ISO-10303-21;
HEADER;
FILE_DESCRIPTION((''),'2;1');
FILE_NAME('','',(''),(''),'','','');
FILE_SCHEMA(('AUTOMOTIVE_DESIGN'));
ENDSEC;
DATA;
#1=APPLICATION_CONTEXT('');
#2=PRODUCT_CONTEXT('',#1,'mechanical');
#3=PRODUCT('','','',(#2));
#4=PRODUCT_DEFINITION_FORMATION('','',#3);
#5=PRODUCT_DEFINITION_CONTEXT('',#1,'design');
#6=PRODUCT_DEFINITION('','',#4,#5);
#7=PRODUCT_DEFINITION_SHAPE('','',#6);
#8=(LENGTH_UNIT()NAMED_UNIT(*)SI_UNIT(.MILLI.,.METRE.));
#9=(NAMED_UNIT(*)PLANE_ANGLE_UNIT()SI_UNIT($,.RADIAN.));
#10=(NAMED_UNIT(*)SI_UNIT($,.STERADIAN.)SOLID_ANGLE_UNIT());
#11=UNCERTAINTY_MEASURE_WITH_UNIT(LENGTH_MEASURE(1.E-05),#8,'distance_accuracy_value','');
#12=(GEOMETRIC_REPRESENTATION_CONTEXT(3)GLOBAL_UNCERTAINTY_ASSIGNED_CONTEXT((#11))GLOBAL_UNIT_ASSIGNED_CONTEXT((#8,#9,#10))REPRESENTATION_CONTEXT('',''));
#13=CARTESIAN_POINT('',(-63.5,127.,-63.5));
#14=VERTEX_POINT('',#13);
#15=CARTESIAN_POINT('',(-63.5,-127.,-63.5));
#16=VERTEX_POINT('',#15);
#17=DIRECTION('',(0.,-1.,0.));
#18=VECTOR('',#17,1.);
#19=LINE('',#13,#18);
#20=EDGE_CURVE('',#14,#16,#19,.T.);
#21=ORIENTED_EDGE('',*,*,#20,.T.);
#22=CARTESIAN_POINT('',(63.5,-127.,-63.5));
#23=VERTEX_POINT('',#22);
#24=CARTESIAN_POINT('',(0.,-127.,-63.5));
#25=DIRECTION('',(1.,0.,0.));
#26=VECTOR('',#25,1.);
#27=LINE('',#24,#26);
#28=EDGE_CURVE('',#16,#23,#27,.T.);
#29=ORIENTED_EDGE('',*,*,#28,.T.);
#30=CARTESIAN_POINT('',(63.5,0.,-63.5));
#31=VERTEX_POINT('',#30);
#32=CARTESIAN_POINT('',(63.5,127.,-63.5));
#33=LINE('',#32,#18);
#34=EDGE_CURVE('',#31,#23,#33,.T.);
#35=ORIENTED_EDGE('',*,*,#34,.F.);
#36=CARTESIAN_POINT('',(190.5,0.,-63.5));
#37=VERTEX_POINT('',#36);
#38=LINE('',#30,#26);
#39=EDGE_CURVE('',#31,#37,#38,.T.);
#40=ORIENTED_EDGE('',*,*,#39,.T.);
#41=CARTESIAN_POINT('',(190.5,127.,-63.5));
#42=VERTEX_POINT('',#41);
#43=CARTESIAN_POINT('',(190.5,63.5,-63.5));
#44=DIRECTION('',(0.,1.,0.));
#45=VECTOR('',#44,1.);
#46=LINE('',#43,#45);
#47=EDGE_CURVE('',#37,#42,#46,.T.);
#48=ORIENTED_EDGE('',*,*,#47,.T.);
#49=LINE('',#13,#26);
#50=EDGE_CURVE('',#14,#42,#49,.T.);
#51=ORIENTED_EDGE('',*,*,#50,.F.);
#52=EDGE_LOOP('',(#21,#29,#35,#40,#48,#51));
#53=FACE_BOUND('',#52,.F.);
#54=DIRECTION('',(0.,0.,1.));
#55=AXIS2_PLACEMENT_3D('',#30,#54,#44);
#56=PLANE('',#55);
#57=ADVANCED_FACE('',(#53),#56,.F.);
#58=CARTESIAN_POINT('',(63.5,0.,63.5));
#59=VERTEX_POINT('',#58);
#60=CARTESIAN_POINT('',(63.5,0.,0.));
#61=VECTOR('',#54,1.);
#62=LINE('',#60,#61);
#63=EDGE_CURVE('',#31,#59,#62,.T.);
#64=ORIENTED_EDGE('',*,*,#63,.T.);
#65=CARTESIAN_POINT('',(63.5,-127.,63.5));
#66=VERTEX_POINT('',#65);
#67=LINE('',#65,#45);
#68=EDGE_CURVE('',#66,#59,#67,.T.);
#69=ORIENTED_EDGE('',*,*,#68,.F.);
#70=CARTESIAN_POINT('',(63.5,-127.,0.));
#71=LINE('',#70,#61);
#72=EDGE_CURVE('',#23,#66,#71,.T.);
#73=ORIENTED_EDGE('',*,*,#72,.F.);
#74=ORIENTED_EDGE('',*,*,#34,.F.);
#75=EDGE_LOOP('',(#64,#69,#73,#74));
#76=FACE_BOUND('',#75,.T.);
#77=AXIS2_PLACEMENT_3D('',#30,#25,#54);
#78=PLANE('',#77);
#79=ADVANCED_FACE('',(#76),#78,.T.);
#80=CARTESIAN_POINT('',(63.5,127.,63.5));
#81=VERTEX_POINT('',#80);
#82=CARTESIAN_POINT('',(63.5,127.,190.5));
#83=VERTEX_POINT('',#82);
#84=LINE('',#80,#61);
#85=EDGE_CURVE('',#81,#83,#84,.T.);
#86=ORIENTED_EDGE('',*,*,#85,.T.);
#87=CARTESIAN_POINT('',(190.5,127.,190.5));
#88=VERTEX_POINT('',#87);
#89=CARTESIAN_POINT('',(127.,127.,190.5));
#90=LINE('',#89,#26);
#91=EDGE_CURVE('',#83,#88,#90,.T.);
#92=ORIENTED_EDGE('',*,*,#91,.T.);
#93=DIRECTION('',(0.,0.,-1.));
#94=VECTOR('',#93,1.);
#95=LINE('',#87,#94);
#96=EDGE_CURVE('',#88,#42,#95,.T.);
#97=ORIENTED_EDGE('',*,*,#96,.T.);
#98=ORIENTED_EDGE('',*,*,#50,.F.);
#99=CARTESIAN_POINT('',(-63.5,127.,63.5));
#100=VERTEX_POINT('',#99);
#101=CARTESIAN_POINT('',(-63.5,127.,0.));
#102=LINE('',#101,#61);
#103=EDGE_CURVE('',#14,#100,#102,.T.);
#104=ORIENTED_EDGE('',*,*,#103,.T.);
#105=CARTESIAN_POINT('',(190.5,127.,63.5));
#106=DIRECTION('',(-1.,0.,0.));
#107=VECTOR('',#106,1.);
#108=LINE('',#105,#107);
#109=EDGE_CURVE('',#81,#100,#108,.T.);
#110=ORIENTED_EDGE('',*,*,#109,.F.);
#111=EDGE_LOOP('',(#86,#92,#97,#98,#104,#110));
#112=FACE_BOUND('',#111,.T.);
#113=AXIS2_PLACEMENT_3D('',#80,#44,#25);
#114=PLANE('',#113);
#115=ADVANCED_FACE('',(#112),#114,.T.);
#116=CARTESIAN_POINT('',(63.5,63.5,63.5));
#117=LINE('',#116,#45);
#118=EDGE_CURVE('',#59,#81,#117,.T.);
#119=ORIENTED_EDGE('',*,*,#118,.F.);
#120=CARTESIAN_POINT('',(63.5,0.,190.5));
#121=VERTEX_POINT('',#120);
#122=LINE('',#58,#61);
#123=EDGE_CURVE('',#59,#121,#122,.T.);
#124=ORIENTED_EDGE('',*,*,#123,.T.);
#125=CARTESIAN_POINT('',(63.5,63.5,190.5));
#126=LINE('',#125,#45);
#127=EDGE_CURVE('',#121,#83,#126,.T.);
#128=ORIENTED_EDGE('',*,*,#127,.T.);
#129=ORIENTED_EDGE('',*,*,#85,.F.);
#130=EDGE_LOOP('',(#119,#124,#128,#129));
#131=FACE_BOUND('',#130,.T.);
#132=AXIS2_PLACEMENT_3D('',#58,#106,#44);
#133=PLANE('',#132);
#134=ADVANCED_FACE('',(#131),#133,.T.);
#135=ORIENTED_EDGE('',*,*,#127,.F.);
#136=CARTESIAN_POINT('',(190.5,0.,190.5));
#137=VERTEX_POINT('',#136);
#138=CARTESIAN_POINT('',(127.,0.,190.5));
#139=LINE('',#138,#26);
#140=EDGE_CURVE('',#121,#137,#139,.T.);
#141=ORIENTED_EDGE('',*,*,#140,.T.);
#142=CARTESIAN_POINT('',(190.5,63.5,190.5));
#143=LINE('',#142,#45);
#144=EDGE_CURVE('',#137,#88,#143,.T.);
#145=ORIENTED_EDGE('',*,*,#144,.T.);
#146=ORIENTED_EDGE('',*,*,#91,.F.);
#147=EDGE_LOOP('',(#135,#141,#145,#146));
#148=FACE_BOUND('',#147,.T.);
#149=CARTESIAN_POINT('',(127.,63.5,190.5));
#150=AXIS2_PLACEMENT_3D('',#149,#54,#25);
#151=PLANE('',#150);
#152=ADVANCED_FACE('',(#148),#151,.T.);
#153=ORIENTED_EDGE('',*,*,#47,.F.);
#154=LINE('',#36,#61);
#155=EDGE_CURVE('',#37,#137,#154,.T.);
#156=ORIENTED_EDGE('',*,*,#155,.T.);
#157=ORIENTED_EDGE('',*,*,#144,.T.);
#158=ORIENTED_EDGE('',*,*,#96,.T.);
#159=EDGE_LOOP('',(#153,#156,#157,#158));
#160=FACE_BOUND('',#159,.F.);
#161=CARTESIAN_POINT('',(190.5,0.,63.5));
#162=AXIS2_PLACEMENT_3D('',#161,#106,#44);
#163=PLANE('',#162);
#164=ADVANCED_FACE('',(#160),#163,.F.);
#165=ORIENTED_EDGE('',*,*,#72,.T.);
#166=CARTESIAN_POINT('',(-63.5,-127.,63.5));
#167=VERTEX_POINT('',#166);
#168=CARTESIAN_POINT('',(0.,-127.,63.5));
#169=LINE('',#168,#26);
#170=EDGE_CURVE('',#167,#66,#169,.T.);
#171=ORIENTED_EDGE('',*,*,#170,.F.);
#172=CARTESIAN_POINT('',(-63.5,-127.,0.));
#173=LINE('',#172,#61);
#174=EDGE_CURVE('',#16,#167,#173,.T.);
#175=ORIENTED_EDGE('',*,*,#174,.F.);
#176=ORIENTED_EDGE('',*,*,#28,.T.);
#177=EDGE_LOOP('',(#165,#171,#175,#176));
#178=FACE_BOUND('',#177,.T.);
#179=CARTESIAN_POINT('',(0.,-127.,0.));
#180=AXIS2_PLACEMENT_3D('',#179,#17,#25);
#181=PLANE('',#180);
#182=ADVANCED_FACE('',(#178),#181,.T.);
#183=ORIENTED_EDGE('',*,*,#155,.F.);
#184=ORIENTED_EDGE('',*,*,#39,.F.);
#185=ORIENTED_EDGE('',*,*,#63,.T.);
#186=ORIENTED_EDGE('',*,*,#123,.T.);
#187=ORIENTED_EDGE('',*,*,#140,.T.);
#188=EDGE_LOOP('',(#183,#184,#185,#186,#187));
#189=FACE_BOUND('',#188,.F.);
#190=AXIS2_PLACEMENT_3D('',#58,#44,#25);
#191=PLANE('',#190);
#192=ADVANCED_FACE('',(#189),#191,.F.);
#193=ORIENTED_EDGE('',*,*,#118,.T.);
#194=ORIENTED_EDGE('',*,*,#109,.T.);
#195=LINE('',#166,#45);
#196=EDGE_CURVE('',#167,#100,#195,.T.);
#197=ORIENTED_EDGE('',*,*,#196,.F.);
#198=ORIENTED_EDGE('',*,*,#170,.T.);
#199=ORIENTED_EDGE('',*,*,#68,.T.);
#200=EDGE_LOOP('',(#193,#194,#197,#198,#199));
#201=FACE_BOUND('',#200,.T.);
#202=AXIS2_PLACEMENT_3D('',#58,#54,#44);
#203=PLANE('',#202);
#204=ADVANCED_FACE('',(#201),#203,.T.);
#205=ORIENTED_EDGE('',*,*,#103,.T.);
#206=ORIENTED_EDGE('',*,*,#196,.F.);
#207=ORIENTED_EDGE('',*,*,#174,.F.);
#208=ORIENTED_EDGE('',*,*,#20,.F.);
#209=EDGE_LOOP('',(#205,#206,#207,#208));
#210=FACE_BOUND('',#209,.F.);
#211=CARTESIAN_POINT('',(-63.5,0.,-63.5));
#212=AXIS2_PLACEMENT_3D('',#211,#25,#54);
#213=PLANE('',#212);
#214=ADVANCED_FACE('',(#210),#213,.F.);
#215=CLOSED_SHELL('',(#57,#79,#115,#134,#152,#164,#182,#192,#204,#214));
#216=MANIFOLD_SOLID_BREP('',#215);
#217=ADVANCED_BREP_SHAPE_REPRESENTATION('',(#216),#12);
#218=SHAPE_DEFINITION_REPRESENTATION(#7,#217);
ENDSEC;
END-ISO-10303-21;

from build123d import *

# Parameters (mm, degrees)
F1_W     = 127
F1_H     = 127
F2_DEPTH = 127
F3_W     = 127
F3_H     = 127
F4_DEPTH = 127
F5_W     = 127
F5_H     = 127
F6_DEPTH = 127


# Not quite as in the source:
# - a variable given as a bare number and used for a length is read in inches; the dataset says mm whatever the document's units were


with BuildPart() as f2:
    # F1 (on Front) → F2 (new body, symmetric)
    with BuildSketch(Plane.XZ):
        Rectangle(F1_W, F1_H)
    extrude(amount=F2_DEPTH, both=True)

    # F3 (on face) → F4 (join)
    with BuildSketch(Plane.YZ.offset(63.5)):
        with Locations((63.5, 0)):
            Rectangle(F3_W, F3_H)
    extrude(amount=F4_DEPTH)

    # F5 (on face) → F6 (join)
    with BuildSketch(Plane.XY.offset(63.5)):
        with Locations((127, 63.5)):
            Rectangle(F5_W, F5_H)
    extrude(amount=F6_DEPTH)


solid = f2.part
